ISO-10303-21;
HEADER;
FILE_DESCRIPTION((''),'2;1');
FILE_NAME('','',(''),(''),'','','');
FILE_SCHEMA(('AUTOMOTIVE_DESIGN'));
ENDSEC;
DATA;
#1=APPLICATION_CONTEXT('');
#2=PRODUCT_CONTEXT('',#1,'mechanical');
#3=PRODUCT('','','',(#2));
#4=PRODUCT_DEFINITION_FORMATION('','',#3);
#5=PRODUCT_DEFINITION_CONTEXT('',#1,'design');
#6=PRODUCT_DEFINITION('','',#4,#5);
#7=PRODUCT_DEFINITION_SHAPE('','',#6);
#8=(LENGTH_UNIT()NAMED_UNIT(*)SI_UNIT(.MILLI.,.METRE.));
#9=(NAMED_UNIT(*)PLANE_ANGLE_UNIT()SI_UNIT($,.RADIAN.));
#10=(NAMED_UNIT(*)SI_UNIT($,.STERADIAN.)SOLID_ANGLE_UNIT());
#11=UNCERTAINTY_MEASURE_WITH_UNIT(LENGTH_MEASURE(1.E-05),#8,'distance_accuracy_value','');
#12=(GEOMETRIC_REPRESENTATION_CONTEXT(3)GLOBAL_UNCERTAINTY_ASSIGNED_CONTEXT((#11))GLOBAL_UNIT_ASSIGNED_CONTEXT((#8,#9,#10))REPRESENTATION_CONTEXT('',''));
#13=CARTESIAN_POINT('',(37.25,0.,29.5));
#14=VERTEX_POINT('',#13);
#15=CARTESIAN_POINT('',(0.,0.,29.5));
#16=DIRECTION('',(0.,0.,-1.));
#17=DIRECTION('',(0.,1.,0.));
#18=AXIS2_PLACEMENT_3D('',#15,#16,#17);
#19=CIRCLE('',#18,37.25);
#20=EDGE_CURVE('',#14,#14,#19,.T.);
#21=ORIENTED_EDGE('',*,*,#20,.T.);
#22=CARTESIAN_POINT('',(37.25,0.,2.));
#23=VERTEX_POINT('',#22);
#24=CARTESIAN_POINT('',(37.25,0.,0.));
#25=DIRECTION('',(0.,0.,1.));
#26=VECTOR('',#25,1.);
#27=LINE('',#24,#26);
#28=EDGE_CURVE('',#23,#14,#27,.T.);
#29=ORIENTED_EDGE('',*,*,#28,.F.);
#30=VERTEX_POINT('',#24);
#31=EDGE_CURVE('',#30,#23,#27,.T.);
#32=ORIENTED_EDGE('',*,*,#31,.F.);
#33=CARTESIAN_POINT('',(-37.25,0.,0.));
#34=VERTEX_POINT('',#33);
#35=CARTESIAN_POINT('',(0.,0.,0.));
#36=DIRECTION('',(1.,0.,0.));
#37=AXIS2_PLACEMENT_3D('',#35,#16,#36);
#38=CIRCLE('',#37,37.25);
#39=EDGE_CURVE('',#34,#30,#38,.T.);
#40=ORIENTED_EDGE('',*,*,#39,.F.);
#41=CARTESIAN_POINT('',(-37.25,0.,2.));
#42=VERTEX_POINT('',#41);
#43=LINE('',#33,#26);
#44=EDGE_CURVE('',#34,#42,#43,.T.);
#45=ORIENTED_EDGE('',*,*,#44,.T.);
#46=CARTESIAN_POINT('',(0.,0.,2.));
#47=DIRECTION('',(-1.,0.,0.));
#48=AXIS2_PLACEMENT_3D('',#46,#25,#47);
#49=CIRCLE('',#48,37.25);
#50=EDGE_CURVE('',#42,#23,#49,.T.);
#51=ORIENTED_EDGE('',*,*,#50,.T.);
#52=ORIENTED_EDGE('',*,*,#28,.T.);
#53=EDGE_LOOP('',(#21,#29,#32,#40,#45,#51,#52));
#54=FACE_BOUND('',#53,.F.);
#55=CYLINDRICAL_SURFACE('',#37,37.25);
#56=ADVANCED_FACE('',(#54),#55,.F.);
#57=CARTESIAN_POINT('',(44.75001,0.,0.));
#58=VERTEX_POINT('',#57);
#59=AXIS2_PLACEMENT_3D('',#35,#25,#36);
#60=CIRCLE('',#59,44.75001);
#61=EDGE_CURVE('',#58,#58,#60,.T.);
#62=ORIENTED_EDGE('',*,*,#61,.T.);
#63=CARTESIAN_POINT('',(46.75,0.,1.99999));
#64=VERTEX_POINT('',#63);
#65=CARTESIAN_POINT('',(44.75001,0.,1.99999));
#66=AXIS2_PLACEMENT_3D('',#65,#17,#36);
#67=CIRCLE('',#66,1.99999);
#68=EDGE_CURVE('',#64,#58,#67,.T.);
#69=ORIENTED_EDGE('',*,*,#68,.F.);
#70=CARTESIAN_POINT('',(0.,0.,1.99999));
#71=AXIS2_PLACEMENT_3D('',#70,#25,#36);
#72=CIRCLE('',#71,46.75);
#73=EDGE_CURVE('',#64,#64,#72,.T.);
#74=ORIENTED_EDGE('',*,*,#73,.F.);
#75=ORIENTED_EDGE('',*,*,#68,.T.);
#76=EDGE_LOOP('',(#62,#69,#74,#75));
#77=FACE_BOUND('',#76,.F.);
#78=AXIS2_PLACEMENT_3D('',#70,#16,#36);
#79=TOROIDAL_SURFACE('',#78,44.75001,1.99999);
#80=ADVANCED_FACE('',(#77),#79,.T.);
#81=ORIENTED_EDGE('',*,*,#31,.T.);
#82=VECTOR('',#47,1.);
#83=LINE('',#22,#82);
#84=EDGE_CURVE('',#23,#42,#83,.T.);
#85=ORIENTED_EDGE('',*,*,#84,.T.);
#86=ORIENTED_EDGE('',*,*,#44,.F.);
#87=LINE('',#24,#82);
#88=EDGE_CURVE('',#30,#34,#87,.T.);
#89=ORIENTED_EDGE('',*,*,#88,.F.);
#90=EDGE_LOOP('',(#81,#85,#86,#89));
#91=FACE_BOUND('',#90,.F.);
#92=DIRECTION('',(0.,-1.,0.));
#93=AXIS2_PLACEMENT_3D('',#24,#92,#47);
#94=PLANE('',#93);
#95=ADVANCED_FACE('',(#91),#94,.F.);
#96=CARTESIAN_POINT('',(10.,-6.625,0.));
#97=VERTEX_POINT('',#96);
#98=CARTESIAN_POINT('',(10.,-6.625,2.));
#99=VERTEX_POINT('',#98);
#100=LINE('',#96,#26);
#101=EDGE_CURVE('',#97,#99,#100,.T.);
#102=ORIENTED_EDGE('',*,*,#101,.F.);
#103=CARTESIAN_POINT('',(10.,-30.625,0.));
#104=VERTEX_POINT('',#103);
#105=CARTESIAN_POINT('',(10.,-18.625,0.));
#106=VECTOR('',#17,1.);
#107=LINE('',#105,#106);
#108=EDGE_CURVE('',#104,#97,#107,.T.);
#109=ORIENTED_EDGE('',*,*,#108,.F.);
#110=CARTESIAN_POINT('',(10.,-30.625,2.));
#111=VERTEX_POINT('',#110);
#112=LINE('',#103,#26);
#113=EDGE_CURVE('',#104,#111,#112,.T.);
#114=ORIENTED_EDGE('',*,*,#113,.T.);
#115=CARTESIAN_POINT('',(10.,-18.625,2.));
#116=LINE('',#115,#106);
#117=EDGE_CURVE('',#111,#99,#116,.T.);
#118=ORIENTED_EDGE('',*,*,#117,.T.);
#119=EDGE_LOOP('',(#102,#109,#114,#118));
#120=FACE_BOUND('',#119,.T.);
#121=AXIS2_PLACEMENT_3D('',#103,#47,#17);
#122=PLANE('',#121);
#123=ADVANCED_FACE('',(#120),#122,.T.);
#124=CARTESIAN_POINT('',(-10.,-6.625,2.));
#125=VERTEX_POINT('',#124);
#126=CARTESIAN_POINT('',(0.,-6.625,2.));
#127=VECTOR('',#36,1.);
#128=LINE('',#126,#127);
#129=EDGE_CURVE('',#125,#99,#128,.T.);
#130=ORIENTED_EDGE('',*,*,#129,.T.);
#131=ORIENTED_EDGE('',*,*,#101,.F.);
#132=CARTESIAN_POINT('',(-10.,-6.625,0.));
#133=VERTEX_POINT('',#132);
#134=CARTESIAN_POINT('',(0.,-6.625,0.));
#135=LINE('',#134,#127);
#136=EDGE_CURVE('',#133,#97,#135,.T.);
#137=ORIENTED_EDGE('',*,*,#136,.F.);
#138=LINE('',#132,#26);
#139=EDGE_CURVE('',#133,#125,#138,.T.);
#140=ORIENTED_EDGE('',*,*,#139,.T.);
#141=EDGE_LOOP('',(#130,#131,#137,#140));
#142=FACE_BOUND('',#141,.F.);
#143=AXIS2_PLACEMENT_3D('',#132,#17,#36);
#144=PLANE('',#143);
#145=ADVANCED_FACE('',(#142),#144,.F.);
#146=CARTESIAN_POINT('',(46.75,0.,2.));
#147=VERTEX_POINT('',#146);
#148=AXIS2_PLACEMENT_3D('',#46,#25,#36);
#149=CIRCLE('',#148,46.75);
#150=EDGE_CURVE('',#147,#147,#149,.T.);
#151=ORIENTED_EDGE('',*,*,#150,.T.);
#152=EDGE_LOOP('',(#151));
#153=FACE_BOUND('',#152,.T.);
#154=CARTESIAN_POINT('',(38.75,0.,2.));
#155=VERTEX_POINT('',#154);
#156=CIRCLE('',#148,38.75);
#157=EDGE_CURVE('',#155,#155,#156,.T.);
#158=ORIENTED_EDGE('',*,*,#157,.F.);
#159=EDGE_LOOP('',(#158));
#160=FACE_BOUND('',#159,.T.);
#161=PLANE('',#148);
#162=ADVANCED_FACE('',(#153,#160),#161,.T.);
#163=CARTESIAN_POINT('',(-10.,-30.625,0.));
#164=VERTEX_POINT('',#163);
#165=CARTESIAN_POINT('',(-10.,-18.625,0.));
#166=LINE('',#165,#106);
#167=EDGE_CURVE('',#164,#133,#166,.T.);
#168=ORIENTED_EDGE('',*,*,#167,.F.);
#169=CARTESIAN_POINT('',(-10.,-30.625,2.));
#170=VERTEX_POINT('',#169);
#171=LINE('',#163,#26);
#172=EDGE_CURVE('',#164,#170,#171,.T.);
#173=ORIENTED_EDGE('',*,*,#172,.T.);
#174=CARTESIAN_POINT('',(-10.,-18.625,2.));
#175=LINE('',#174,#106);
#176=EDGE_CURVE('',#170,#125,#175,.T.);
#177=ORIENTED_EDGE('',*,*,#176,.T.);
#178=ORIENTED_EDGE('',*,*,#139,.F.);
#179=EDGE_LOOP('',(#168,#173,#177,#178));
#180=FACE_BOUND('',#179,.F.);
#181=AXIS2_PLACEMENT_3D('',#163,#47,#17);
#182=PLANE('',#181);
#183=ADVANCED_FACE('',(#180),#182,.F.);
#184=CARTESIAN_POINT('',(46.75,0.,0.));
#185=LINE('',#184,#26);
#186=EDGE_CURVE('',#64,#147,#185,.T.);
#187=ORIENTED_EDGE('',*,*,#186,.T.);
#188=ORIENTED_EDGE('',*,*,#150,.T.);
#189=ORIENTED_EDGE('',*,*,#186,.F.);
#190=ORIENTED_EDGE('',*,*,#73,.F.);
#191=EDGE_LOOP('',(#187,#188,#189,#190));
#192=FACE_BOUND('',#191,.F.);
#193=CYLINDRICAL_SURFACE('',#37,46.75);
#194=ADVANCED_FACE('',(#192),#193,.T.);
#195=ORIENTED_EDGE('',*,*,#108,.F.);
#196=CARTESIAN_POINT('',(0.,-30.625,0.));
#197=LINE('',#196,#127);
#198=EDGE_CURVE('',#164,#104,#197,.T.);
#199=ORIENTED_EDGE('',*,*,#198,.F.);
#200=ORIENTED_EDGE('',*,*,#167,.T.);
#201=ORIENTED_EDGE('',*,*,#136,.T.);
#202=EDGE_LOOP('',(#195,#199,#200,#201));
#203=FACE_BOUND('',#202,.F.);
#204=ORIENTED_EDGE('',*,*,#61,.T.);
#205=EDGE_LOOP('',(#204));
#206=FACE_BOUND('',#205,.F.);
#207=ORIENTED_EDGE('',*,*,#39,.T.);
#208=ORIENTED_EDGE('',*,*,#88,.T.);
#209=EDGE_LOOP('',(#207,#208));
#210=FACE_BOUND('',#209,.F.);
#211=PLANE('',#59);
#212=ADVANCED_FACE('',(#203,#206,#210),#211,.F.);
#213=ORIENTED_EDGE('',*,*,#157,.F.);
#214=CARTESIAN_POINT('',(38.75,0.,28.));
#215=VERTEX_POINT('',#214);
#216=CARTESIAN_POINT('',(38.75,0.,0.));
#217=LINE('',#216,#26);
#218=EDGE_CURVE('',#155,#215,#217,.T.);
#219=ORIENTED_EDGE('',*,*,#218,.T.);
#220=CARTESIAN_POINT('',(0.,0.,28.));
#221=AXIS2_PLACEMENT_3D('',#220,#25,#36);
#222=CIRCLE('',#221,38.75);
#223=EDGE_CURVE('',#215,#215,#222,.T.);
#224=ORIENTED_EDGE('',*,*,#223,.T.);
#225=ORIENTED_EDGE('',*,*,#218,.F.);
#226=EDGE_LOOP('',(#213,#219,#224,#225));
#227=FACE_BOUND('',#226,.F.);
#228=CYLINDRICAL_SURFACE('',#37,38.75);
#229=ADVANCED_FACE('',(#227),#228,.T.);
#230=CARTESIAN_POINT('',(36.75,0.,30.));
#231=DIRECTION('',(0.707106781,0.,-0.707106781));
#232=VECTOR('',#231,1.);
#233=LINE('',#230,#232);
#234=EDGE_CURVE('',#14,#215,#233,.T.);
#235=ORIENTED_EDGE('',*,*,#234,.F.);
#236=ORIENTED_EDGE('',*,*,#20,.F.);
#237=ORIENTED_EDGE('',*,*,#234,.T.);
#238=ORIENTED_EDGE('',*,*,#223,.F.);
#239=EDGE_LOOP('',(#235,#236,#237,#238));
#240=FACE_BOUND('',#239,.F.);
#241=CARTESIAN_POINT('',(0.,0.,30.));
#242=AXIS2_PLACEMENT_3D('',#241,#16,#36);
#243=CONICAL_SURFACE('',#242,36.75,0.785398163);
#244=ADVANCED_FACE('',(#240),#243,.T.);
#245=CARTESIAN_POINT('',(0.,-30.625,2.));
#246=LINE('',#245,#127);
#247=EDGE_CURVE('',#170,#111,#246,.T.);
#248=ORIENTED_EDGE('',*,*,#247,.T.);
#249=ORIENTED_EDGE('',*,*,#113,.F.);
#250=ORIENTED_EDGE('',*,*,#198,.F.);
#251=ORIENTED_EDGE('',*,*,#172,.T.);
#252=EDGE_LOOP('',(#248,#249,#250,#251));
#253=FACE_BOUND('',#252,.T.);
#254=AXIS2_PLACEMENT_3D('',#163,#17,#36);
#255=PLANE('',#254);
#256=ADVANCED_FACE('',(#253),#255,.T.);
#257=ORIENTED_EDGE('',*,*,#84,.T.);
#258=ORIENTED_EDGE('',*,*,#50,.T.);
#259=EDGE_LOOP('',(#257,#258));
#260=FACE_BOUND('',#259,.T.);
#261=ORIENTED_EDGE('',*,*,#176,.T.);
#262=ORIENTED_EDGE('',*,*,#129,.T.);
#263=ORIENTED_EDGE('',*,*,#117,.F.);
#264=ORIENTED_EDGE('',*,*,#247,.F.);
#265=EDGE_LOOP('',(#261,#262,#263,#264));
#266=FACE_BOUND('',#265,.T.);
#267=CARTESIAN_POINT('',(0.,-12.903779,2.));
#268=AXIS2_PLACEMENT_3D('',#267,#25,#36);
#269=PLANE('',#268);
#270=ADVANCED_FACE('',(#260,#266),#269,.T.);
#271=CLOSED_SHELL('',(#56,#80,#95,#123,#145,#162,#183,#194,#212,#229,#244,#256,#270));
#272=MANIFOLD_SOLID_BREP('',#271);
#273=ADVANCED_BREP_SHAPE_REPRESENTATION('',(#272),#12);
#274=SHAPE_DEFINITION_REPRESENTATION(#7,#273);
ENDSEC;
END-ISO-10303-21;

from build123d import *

# Parameters (mm, degrees)
F0_R     = 46.75
F0_R_2   = 38.75
F1_DEPTH = 2
F0_W     = 20
F0_H     = 24
F2_DEPTH = 30
F4_R     = 1.99999


# Not quite as in the source:
# - a fillet or chamfer that OpenCascade refuses, or shapes differently, is made with other operations: its cross-section is extruded or revolved along the edge and cut away or added
# - a fillet or chamfer is up to 0.001 mm smaller than in the source, because OpenCascade refuses the exact size


with BuildPart() as f1:
    # F0 (on Top) → F1 (new body)
    with BuildSketch(Plane.XY):
        Circle(F0_R)
        Circle(F0_R_2, mode=Mode.SUBTRACT)
    extrude(amount=F1_DEPTH)



with BuildPart() as f1b:
    # F0 (on Top) → F1, piece 2 (new body)
    with BuildSketch(Plane.XY):
        with BuildLine():
            ThreePointArc((-37.25, 0), (0, -37.25), (37.25, 0))
            Line((37.25, 0), (-37.25, 0))
        make_face()
        with Locations((0, -18.625)):
            Rectangle(F0_W, F0_H, mode=Mode.SUBTRACT)
    extrude(amount=F1_DEPTH)


with BuildPart() as f1_1:
    add(f1.part)

    add(f1b.part)  # F2 merges F1b
    # F0 (on Top) → F2 (join)
    with BuildSketch(Plane.XY):
        Circle(F0_R_2)
        with BuildLine():
            ThreePointArc((-37.25, 0), (0, 37.25), (37.25, 0))
            ThreePointArc((37.25, 0), (0, -37.25), (-37.25, 0))
        make_face(mode=Mode.SUBTRACT)
    extrude(amount=F2_DEPTH)

    # F3: chamfer of 2 on 1 edges, made by hand

    # F3_s1 → F3_t2 (revolve, cut)
    with BuildSketch(Plane.XZ):
        Polygon((36.75, 30), (38.75, 28), (38.75, 30), align=None)
    revolve(axis=Axis((0, 0, 30), (0, 0, 1)), mode=Mode.SUBTRACT)

    # F4 (radius 2 in the source; OpenCascade refuses exactly that, so slightly less here)
    f4_edges = [f1_1.edges().sort_by_distance(p)[0] for p in [
        (-46.75, 0, 0),
    ]]
    fillet(f4_edges, radius=F4_R)


solid = f1_1.part
